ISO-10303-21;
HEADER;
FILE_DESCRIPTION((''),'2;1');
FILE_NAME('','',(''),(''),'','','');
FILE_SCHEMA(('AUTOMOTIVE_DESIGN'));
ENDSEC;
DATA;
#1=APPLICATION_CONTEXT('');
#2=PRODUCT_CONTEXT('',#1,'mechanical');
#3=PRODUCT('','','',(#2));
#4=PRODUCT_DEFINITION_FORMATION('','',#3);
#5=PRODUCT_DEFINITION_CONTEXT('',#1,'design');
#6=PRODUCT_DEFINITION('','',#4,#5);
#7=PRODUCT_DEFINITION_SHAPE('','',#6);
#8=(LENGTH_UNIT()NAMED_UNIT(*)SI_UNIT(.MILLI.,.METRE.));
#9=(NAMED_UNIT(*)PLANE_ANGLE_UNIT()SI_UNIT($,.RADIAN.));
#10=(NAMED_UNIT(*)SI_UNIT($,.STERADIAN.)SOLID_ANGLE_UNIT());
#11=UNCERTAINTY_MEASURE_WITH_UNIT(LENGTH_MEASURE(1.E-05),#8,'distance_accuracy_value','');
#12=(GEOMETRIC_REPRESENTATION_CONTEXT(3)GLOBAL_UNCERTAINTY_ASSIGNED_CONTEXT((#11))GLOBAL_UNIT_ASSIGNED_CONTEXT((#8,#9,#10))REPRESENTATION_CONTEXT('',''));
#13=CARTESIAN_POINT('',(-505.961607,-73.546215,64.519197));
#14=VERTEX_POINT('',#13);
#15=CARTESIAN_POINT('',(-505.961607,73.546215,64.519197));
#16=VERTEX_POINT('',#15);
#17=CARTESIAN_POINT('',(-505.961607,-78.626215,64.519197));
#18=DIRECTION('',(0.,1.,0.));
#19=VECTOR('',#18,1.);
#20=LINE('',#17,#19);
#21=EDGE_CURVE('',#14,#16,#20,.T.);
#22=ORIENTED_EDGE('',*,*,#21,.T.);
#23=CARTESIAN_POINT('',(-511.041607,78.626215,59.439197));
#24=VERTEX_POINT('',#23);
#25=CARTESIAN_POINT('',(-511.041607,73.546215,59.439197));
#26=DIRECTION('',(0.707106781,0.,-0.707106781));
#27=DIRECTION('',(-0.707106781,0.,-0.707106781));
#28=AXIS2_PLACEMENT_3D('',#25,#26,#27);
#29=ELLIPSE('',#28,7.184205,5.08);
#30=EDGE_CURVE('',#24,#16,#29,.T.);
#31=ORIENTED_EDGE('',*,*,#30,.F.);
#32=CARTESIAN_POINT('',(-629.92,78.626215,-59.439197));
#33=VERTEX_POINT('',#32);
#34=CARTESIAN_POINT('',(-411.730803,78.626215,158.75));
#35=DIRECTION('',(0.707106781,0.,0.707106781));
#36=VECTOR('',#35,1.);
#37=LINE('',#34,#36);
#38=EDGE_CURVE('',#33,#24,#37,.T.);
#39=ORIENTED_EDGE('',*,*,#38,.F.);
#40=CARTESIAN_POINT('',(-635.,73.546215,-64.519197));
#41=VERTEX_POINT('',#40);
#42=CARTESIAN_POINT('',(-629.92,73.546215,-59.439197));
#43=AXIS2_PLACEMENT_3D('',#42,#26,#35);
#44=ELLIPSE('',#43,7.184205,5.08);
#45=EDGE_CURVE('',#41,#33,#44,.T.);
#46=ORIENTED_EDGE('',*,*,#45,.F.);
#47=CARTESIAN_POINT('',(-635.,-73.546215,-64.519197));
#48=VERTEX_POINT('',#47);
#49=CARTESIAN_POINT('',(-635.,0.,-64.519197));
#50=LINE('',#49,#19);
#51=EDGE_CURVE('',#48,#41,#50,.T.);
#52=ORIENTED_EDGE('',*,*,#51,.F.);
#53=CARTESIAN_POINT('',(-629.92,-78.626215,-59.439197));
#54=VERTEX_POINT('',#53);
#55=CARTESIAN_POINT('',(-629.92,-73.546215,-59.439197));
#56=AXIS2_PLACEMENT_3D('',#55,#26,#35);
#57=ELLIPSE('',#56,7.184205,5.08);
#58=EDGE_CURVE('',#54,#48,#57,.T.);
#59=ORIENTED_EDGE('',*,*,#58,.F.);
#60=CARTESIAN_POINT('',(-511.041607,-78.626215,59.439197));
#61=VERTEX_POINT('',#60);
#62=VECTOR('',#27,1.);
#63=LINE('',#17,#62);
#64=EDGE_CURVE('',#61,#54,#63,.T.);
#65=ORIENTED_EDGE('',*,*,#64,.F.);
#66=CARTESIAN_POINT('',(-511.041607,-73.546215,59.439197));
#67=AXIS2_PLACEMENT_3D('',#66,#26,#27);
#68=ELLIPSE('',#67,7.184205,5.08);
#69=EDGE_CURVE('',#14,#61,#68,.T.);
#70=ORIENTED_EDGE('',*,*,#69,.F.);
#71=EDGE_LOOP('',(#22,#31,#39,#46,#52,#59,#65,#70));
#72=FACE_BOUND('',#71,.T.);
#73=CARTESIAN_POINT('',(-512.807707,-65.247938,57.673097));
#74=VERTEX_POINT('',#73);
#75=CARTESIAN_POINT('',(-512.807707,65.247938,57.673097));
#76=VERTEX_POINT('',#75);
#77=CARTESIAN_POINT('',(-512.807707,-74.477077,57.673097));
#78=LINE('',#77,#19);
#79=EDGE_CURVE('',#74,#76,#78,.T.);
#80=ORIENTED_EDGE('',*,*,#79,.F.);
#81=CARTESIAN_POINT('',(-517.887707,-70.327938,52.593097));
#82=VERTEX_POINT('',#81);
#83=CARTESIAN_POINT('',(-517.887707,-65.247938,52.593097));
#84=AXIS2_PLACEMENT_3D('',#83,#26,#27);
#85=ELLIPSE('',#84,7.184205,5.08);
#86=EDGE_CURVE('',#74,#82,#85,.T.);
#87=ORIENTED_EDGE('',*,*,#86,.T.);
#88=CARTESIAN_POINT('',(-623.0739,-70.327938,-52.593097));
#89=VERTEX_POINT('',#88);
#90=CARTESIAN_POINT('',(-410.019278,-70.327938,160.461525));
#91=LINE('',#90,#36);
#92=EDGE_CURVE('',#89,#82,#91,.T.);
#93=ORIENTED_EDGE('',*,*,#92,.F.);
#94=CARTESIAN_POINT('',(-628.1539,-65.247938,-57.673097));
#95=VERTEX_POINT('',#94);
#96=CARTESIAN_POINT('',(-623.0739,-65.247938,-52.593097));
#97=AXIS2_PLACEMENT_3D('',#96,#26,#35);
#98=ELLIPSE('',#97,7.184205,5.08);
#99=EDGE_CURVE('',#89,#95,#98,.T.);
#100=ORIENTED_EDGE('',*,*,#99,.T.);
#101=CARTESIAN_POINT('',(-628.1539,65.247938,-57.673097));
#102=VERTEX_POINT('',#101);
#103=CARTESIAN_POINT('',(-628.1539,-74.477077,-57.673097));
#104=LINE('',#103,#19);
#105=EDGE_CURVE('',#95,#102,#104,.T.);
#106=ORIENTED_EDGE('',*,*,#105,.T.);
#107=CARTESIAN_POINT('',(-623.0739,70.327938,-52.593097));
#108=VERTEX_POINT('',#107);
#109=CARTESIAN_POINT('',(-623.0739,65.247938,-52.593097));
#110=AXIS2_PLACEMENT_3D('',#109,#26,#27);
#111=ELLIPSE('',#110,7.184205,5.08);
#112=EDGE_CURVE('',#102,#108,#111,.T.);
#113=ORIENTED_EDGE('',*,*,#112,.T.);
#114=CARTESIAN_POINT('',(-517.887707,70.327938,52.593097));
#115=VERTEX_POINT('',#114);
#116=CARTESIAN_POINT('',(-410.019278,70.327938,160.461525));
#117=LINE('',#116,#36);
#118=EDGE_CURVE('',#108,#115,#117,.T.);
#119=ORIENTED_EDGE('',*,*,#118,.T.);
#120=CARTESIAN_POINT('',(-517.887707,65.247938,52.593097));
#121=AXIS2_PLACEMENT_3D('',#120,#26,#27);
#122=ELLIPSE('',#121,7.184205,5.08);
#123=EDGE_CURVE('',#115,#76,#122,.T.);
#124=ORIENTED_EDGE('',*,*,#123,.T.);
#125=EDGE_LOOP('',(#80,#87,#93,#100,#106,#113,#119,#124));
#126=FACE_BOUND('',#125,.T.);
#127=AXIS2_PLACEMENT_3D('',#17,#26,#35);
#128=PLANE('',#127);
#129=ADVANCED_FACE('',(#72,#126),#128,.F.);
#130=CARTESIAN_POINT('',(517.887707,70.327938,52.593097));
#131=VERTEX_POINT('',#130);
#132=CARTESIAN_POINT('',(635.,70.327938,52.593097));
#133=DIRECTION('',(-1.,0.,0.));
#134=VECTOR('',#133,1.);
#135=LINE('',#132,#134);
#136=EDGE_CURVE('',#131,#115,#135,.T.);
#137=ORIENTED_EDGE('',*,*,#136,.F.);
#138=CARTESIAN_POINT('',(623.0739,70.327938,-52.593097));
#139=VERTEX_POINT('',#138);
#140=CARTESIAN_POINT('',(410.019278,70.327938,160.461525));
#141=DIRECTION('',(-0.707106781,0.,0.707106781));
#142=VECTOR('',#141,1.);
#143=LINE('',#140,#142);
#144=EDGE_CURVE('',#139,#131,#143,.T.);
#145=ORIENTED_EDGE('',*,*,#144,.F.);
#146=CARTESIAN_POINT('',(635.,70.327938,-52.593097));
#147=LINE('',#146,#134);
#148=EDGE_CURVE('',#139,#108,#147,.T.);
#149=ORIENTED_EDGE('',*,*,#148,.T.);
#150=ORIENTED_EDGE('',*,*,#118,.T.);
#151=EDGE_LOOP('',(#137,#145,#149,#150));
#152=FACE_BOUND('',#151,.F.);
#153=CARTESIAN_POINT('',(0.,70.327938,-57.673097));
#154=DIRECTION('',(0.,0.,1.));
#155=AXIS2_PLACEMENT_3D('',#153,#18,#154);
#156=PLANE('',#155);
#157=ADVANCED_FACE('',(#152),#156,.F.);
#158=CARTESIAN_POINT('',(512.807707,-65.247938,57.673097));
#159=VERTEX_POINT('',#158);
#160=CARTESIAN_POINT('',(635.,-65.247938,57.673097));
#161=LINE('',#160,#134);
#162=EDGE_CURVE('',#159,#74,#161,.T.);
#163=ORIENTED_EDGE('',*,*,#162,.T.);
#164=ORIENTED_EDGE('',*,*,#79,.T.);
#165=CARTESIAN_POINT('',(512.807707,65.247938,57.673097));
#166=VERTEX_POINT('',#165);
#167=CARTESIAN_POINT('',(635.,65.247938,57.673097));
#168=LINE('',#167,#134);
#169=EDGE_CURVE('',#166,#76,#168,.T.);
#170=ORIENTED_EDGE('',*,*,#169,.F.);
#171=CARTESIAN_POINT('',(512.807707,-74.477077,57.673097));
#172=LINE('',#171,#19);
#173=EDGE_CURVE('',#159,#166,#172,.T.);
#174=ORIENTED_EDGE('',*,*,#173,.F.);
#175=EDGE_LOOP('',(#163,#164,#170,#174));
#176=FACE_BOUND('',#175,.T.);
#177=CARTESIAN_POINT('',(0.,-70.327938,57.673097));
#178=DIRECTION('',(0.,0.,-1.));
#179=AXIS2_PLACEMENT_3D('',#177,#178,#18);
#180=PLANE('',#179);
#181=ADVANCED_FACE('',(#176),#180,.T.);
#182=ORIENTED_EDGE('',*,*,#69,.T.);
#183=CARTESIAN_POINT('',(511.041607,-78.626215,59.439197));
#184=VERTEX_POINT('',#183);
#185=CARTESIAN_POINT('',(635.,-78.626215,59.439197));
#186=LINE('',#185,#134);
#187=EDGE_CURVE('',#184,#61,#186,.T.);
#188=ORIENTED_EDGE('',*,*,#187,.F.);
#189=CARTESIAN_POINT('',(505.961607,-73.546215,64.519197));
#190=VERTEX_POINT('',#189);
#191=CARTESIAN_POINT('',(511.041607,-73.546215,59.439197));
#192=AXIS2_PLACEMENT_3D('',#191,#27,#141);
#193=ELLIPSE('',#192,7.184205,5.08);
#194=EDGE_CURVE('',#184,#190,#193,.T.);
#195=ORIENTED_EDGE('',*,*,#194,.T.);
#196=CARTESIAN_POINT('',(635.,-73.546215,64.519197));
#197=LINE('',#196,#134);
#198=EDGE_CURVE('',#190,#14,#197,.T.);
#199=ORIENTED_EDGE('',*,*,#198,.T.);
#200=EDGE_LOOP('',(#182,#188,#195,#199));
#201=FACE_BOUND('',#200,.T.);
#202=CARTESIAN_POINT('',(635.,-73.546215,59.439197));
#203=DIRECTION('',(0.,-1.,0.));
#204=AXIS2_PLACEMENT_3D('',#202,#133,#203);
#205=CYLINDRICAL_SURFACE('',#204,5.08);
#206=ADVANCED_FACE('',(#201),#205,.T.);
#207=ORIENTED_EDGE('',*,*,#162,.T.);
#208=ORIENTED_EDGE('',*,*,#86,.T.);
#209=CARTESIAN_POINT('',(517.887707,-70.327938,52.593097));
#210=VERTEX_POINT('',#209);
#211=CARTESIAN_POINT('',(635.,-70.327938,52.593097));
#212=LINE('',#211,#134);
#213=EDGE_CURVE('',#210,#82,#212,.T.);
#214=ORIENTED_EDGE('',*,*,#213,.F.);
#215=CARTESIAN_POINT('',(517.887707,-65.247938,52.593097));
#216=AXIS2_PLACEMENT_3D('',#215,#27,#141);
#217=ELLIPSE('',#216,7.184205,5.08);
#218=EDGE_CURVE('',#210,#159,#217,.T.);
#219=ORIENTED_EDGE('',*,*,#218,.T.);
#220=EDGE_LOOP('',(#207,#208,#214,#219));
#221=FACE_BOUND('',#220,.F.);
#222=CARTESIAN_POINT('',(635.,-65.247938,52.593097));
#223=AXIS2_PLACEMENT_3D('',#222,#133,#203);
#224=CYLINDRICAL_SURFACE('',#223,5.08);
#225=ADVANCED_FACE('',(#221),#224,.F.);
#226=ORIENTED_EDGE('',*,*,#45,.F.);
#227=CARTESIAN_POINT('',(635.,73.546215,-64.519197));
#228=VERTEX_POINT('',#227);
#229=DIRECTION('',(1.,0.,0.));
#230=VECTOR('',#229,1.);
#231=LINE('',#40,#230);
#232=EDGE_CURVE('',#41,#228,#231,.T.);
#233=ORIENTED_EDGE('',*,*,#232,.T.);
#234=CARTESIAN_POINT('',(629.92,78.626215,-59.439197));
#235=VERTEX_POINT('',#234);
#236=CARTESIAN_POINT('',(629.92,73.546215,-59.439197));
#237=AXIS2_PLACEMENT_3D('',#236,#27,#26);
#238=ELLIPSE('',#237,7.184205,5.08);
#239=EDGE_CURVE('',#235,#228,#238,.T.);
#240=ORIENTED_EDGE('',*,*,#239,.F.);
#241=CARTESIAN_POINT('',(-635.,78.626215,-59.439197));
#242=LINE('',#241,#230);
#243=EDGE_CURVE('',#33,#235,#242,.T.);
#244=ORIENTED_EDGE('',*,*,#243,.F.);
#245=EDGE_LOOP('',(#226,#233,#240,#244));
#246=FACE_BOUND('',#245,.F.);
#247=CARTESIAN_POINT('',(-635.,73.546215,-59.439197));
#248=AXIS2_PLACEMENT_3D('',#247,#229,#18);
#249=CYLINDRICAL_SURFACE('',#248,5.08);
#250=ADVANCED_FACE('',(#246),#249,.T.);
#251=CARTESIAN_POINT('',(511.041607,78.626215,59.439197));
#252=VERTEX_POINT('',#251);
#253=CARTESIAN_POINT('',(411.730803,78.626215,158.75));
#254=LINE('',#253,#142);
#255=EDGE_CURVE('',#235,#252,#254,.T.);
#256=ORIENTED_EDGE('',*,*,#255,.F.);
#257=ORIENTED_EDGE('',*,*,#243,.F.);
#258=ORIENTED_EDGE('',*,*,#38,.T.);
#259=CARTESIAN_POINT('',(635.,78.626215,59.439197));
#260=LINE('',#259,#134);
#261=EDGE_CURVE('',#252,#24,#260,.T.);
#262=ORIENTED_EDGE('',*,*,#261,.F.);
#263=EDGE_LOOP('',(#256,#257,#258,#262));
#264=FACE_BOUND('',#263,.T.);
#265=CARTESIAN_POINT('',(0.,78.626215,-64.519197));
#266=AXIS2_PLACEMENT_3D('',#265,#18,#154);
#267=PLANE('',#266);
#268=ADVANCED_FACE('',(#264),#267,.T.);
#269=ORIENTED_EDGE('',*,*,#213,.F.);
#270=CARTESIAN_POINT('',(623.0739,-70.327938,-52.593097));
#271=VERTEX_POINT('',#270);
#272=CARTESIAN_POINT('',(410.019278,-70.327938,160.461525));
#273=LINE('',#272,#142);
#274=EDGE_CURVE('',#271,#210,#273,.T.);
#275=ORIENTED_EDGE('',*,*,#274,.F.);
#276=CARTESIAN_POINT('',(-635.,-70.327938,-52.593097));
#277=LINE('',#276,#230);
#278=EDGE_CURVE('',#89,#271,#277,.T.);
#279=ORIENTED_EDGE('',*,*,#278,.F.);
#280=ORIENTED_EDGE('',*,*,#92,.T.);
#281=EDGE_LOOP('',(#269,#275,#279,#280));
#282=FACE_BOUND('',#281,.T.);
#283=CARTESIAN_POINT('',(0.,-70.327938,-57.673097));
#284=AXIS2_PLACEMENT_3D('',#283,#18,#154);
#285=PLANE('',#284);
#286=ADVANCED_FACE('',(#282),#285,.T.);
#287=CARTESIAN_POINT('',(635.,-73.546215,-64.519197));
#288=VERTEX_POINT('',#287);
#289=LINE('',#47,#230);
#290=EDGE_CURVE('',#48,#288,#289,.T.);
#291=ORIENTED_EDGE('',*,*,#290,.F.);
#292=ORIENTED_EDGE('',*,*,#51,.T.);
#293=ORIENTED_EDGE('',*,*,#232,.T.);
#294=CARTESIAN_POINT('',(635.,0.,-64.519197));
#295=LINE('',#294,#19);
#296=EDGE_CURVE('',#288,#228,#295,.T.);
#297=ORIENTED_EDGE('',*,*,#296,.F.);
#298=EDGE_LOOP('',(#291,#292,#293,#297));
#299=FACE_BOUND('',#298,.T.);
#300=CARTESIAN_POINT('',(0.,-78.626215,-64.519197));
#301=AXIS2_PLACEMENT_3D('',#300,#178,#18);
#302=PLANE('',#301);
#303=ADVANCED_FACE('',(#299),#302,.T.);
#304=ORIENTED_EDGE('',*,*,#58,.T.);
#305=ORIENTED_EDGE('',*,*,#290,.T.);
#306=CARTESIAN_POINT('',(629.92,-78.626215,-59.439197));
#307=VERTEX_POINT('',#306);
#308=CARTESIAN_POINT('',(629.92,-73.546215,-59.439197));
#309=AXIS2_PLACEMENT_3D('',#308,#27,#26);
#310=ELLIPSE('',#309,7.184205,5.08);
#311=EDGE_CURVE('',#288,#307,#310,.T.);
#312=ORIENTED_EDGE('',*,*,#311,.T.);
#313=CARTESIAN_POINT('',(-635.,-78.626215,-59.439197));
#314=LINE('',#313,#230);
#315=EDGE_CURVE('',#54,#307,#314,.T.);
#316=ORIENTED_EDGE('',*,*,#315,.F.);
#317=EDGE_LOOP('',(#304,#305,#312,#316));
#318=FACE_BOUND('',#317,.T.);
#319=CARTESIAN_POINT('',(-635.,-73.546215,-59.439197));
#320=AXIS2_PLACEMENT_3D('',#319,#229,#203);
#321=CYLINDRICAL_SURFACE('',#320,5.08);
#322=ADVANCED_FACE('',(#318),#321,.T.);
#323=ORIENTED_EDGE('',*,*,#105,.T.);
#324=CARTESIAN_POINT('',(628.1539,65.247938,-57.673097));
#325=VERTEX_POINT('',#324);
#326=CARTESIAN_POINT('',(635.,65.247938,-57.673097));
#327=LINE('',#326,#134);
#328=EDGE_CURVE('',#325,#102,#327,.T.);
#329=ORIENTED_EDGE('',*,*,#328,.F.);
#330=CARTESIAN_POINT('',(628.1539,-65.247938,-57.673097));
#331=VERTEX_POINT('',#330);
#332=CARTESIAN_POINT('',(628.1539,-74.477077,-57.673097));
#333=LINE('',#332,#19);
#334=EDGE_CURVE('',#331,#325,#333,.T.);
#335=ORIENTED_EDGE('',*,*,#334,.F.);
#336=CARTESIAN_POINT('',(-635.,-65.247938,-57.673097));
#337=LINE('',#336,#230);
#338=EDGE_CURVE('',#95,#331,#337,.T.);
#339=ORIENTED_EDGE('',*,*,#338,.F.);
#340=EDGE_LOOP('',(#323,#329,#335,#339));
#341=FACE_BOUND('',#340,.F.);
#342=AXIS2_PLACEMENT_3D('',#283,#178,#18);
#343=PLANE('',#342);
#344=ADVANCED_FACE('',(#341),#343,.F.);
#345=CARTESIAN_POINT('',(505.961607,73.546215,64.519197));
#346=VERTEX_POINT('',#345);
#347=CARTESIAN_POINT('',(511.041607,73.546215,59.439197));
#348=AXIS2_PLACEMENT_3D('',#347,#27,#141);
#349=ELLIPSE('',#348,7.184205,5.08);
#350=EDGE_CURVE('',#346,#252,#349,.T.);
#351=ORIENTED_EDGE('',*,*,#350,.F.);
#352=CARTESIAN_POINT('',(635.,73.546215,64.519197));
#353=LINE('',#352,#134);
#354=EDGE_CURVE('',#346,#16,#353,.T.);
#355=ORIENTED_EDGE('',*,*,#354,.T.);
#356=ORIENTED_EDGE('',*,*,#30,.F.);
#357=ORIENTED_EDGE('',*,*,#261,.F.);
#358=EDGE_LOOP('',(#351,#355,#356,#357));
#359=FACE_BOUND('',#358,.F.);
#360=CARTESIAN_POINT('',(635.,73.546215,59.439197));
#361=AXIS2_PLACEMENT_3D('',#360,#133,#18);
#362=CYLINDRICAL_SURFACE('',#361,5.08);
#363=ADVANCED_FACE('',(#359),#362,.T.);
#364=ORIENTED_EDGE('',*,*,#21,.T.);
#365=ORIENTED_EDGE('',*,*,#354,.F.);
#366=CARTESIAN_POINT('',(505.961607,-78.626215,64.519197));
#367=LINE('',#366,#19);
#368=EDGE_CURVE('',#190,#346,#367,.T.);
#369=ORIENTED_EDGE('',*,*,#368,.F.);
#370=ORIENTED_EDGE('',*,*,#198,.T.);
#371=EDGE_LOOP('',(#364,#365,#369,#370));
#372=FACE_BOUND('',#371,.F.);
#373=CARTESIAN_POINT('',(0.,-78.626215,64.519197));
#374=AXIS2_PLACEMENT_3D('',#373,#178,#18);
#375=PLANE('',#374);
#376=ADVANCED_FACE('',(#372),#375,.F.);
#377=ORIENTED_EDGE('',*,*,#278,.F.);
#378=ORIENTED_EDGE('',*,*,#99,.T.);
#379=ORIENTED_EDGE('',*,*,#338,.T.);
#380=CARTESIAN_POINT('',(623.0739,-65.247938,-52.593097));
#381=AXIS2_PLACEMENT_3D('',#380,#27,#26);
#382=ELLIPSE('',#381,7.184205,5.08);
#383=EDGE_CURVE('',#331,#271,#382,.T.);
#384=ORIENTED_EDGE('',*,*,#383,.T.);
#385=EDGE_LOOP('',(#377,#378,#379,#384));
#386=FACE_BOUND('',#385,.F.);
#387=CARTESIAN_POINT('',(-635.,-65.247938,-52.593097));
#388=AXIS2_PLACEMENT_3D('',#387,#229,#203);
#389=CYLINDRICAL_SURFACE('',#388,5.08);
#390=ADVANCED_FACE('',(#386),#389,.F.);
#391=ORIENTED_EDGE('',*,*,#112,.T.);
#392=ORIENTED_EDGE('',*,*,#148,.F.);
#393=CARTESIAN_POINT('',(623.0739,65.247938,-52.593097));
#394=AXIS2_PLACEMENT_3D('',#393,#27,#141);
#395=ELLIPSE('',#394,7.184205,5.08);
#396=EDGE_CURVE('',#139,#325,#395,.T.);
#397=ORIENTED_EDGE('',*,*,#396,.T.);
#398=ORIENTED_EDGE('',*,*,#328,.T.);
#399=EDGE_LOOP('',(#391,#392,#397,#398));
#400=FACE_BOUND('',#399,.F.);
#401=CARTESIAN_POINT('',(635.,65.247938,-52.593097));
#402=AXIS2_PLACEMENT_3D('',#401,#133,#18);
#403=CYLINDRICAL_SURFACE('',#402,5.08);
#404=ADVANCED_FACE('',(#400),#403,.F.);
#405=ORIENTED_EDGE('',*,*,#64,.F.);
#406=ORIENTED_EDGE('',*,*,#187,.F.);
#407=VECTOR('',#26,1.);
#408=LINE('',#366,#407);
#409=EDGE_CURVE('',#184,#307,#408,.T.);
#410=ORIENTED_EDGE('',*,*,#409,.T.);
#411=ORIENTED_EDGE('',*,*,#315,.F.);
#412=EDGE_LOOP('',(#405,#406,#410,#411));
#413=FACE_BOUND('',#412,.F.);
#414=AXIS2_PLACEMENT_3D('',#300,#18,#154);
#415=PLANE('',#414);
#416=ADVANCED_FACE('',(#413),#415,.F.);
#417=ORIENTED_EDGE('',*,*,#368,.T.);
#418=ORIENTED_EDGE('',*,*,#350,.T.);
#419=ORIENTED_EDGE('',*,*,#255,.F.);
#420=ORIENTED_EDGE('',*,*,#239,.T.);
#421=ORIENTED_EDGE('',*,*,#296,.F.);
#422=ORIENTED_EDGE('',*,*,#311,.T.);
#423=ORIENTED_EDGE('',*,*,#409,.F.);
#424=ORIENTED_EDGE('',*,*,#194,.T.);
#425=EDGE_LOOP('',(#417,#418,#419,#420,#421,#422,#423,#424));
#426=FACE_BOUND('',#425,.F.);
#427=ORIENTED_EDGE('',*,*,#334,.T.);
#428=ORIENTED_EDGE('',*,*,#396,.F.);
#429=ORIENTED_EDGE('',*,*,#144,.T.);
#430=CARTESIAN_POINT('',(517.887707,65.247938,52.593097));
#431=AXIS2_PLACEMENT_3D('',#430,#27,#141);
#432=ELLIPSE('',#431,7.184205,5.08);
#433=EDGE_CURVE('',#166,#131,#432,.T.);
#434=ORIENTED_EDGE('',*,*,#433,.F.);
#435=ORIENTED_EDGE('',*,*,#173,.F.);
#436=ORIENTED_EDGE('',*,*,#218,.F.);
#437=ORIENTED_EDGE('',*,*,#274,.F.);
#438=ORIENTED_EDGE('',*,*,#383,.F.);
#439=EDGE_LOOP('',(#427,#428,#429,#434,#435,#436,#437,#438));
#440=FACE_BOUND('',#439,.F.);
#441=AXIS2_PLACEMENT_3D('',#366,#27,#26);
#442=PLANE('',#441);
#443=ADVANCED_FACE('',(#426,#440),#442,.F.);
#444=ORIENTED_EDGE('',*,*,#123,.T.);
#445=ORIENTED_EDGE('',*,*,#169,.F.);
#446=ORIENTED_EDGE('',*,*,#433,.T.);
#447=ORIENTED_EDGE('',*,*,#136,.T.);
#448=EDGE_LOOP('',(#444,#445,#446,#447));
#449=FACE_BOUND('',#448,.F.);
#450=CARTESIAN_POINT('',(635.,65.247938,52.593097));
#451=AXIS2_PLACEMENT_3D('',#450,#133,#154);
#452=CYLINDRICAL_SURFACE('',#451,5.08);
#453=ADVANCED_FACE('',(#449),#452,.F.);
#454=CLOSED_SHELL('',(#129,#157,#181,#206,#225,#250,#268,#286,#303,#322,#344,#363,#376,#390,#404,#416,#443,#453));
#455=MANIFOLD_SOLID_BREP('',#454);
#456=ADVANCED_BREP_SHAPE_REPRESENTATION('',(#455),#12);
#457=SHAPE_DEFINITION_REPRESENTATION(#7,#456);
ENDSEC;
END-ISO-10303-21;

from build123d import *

# Parameters (mm, degrees)
F0_W     = 157.2524309158
F0_H     = 129.0383934975
F0_W_2   = 140.655875206
F0_H_2   = 115.3461933136
F1_DEPTH = 635
F2_R     = 5.08
F4_DEPTH = 157.2534309158


# Not quite as in the source:
# - a pattern or mirror of a feature is missing from the dataset's text; its kind, count and spacing are read off the source's solid


with BuildPart() as f1:
    # F0 (on Right) → F1 (new body, symmetric)
    with BuildSketch(Plane.YZ):
        Rectangle(F0_W, F0_H)
        Rectangle(F0_W_2, F0_H_2, mode=Mode.SUBTRACT)
    extrude(amount=F1_DEPTH, both=True)

    # F2
    f2_edges = [f1.edges().sort_by_distance(p)[0] for p in [
        (0, -78.626215, 64.519197),
        (0, -70.327938, 57.673097),
        (0, 70.327938, 57.673097),
        (0, 78.626215, 64.519197),
        (0, 78.626215, -64.519197),
        (0, 70.327938, -57.673097),
        (0, -70.327938, -57.673097),
        (0, -78.626215, -64.519197),
    ]]
    fillet(f2_edges, radius=F2_R)

    # F3 (on face) → F4 (cut, through all)
    with BuildSketch(Plane.XZ.offset(78.6262154579)):
        Polygon((635, -64.5191967487), (635, 64.5191967487), (505.9616065025, 64.5191967487), align=None)
    f4 = extrude(amount=-F4_DEPTH, mode=Mode.SUBTRACT)

    # F4_copies: F4 across plane
    add(f4.mirror(Plane(origin=(0, 0, 0), x_dir=(0, 0, -1), z_dir=(-1, 0, 0))), mode=Mode.SUBTRACT)


solid = f1.part
